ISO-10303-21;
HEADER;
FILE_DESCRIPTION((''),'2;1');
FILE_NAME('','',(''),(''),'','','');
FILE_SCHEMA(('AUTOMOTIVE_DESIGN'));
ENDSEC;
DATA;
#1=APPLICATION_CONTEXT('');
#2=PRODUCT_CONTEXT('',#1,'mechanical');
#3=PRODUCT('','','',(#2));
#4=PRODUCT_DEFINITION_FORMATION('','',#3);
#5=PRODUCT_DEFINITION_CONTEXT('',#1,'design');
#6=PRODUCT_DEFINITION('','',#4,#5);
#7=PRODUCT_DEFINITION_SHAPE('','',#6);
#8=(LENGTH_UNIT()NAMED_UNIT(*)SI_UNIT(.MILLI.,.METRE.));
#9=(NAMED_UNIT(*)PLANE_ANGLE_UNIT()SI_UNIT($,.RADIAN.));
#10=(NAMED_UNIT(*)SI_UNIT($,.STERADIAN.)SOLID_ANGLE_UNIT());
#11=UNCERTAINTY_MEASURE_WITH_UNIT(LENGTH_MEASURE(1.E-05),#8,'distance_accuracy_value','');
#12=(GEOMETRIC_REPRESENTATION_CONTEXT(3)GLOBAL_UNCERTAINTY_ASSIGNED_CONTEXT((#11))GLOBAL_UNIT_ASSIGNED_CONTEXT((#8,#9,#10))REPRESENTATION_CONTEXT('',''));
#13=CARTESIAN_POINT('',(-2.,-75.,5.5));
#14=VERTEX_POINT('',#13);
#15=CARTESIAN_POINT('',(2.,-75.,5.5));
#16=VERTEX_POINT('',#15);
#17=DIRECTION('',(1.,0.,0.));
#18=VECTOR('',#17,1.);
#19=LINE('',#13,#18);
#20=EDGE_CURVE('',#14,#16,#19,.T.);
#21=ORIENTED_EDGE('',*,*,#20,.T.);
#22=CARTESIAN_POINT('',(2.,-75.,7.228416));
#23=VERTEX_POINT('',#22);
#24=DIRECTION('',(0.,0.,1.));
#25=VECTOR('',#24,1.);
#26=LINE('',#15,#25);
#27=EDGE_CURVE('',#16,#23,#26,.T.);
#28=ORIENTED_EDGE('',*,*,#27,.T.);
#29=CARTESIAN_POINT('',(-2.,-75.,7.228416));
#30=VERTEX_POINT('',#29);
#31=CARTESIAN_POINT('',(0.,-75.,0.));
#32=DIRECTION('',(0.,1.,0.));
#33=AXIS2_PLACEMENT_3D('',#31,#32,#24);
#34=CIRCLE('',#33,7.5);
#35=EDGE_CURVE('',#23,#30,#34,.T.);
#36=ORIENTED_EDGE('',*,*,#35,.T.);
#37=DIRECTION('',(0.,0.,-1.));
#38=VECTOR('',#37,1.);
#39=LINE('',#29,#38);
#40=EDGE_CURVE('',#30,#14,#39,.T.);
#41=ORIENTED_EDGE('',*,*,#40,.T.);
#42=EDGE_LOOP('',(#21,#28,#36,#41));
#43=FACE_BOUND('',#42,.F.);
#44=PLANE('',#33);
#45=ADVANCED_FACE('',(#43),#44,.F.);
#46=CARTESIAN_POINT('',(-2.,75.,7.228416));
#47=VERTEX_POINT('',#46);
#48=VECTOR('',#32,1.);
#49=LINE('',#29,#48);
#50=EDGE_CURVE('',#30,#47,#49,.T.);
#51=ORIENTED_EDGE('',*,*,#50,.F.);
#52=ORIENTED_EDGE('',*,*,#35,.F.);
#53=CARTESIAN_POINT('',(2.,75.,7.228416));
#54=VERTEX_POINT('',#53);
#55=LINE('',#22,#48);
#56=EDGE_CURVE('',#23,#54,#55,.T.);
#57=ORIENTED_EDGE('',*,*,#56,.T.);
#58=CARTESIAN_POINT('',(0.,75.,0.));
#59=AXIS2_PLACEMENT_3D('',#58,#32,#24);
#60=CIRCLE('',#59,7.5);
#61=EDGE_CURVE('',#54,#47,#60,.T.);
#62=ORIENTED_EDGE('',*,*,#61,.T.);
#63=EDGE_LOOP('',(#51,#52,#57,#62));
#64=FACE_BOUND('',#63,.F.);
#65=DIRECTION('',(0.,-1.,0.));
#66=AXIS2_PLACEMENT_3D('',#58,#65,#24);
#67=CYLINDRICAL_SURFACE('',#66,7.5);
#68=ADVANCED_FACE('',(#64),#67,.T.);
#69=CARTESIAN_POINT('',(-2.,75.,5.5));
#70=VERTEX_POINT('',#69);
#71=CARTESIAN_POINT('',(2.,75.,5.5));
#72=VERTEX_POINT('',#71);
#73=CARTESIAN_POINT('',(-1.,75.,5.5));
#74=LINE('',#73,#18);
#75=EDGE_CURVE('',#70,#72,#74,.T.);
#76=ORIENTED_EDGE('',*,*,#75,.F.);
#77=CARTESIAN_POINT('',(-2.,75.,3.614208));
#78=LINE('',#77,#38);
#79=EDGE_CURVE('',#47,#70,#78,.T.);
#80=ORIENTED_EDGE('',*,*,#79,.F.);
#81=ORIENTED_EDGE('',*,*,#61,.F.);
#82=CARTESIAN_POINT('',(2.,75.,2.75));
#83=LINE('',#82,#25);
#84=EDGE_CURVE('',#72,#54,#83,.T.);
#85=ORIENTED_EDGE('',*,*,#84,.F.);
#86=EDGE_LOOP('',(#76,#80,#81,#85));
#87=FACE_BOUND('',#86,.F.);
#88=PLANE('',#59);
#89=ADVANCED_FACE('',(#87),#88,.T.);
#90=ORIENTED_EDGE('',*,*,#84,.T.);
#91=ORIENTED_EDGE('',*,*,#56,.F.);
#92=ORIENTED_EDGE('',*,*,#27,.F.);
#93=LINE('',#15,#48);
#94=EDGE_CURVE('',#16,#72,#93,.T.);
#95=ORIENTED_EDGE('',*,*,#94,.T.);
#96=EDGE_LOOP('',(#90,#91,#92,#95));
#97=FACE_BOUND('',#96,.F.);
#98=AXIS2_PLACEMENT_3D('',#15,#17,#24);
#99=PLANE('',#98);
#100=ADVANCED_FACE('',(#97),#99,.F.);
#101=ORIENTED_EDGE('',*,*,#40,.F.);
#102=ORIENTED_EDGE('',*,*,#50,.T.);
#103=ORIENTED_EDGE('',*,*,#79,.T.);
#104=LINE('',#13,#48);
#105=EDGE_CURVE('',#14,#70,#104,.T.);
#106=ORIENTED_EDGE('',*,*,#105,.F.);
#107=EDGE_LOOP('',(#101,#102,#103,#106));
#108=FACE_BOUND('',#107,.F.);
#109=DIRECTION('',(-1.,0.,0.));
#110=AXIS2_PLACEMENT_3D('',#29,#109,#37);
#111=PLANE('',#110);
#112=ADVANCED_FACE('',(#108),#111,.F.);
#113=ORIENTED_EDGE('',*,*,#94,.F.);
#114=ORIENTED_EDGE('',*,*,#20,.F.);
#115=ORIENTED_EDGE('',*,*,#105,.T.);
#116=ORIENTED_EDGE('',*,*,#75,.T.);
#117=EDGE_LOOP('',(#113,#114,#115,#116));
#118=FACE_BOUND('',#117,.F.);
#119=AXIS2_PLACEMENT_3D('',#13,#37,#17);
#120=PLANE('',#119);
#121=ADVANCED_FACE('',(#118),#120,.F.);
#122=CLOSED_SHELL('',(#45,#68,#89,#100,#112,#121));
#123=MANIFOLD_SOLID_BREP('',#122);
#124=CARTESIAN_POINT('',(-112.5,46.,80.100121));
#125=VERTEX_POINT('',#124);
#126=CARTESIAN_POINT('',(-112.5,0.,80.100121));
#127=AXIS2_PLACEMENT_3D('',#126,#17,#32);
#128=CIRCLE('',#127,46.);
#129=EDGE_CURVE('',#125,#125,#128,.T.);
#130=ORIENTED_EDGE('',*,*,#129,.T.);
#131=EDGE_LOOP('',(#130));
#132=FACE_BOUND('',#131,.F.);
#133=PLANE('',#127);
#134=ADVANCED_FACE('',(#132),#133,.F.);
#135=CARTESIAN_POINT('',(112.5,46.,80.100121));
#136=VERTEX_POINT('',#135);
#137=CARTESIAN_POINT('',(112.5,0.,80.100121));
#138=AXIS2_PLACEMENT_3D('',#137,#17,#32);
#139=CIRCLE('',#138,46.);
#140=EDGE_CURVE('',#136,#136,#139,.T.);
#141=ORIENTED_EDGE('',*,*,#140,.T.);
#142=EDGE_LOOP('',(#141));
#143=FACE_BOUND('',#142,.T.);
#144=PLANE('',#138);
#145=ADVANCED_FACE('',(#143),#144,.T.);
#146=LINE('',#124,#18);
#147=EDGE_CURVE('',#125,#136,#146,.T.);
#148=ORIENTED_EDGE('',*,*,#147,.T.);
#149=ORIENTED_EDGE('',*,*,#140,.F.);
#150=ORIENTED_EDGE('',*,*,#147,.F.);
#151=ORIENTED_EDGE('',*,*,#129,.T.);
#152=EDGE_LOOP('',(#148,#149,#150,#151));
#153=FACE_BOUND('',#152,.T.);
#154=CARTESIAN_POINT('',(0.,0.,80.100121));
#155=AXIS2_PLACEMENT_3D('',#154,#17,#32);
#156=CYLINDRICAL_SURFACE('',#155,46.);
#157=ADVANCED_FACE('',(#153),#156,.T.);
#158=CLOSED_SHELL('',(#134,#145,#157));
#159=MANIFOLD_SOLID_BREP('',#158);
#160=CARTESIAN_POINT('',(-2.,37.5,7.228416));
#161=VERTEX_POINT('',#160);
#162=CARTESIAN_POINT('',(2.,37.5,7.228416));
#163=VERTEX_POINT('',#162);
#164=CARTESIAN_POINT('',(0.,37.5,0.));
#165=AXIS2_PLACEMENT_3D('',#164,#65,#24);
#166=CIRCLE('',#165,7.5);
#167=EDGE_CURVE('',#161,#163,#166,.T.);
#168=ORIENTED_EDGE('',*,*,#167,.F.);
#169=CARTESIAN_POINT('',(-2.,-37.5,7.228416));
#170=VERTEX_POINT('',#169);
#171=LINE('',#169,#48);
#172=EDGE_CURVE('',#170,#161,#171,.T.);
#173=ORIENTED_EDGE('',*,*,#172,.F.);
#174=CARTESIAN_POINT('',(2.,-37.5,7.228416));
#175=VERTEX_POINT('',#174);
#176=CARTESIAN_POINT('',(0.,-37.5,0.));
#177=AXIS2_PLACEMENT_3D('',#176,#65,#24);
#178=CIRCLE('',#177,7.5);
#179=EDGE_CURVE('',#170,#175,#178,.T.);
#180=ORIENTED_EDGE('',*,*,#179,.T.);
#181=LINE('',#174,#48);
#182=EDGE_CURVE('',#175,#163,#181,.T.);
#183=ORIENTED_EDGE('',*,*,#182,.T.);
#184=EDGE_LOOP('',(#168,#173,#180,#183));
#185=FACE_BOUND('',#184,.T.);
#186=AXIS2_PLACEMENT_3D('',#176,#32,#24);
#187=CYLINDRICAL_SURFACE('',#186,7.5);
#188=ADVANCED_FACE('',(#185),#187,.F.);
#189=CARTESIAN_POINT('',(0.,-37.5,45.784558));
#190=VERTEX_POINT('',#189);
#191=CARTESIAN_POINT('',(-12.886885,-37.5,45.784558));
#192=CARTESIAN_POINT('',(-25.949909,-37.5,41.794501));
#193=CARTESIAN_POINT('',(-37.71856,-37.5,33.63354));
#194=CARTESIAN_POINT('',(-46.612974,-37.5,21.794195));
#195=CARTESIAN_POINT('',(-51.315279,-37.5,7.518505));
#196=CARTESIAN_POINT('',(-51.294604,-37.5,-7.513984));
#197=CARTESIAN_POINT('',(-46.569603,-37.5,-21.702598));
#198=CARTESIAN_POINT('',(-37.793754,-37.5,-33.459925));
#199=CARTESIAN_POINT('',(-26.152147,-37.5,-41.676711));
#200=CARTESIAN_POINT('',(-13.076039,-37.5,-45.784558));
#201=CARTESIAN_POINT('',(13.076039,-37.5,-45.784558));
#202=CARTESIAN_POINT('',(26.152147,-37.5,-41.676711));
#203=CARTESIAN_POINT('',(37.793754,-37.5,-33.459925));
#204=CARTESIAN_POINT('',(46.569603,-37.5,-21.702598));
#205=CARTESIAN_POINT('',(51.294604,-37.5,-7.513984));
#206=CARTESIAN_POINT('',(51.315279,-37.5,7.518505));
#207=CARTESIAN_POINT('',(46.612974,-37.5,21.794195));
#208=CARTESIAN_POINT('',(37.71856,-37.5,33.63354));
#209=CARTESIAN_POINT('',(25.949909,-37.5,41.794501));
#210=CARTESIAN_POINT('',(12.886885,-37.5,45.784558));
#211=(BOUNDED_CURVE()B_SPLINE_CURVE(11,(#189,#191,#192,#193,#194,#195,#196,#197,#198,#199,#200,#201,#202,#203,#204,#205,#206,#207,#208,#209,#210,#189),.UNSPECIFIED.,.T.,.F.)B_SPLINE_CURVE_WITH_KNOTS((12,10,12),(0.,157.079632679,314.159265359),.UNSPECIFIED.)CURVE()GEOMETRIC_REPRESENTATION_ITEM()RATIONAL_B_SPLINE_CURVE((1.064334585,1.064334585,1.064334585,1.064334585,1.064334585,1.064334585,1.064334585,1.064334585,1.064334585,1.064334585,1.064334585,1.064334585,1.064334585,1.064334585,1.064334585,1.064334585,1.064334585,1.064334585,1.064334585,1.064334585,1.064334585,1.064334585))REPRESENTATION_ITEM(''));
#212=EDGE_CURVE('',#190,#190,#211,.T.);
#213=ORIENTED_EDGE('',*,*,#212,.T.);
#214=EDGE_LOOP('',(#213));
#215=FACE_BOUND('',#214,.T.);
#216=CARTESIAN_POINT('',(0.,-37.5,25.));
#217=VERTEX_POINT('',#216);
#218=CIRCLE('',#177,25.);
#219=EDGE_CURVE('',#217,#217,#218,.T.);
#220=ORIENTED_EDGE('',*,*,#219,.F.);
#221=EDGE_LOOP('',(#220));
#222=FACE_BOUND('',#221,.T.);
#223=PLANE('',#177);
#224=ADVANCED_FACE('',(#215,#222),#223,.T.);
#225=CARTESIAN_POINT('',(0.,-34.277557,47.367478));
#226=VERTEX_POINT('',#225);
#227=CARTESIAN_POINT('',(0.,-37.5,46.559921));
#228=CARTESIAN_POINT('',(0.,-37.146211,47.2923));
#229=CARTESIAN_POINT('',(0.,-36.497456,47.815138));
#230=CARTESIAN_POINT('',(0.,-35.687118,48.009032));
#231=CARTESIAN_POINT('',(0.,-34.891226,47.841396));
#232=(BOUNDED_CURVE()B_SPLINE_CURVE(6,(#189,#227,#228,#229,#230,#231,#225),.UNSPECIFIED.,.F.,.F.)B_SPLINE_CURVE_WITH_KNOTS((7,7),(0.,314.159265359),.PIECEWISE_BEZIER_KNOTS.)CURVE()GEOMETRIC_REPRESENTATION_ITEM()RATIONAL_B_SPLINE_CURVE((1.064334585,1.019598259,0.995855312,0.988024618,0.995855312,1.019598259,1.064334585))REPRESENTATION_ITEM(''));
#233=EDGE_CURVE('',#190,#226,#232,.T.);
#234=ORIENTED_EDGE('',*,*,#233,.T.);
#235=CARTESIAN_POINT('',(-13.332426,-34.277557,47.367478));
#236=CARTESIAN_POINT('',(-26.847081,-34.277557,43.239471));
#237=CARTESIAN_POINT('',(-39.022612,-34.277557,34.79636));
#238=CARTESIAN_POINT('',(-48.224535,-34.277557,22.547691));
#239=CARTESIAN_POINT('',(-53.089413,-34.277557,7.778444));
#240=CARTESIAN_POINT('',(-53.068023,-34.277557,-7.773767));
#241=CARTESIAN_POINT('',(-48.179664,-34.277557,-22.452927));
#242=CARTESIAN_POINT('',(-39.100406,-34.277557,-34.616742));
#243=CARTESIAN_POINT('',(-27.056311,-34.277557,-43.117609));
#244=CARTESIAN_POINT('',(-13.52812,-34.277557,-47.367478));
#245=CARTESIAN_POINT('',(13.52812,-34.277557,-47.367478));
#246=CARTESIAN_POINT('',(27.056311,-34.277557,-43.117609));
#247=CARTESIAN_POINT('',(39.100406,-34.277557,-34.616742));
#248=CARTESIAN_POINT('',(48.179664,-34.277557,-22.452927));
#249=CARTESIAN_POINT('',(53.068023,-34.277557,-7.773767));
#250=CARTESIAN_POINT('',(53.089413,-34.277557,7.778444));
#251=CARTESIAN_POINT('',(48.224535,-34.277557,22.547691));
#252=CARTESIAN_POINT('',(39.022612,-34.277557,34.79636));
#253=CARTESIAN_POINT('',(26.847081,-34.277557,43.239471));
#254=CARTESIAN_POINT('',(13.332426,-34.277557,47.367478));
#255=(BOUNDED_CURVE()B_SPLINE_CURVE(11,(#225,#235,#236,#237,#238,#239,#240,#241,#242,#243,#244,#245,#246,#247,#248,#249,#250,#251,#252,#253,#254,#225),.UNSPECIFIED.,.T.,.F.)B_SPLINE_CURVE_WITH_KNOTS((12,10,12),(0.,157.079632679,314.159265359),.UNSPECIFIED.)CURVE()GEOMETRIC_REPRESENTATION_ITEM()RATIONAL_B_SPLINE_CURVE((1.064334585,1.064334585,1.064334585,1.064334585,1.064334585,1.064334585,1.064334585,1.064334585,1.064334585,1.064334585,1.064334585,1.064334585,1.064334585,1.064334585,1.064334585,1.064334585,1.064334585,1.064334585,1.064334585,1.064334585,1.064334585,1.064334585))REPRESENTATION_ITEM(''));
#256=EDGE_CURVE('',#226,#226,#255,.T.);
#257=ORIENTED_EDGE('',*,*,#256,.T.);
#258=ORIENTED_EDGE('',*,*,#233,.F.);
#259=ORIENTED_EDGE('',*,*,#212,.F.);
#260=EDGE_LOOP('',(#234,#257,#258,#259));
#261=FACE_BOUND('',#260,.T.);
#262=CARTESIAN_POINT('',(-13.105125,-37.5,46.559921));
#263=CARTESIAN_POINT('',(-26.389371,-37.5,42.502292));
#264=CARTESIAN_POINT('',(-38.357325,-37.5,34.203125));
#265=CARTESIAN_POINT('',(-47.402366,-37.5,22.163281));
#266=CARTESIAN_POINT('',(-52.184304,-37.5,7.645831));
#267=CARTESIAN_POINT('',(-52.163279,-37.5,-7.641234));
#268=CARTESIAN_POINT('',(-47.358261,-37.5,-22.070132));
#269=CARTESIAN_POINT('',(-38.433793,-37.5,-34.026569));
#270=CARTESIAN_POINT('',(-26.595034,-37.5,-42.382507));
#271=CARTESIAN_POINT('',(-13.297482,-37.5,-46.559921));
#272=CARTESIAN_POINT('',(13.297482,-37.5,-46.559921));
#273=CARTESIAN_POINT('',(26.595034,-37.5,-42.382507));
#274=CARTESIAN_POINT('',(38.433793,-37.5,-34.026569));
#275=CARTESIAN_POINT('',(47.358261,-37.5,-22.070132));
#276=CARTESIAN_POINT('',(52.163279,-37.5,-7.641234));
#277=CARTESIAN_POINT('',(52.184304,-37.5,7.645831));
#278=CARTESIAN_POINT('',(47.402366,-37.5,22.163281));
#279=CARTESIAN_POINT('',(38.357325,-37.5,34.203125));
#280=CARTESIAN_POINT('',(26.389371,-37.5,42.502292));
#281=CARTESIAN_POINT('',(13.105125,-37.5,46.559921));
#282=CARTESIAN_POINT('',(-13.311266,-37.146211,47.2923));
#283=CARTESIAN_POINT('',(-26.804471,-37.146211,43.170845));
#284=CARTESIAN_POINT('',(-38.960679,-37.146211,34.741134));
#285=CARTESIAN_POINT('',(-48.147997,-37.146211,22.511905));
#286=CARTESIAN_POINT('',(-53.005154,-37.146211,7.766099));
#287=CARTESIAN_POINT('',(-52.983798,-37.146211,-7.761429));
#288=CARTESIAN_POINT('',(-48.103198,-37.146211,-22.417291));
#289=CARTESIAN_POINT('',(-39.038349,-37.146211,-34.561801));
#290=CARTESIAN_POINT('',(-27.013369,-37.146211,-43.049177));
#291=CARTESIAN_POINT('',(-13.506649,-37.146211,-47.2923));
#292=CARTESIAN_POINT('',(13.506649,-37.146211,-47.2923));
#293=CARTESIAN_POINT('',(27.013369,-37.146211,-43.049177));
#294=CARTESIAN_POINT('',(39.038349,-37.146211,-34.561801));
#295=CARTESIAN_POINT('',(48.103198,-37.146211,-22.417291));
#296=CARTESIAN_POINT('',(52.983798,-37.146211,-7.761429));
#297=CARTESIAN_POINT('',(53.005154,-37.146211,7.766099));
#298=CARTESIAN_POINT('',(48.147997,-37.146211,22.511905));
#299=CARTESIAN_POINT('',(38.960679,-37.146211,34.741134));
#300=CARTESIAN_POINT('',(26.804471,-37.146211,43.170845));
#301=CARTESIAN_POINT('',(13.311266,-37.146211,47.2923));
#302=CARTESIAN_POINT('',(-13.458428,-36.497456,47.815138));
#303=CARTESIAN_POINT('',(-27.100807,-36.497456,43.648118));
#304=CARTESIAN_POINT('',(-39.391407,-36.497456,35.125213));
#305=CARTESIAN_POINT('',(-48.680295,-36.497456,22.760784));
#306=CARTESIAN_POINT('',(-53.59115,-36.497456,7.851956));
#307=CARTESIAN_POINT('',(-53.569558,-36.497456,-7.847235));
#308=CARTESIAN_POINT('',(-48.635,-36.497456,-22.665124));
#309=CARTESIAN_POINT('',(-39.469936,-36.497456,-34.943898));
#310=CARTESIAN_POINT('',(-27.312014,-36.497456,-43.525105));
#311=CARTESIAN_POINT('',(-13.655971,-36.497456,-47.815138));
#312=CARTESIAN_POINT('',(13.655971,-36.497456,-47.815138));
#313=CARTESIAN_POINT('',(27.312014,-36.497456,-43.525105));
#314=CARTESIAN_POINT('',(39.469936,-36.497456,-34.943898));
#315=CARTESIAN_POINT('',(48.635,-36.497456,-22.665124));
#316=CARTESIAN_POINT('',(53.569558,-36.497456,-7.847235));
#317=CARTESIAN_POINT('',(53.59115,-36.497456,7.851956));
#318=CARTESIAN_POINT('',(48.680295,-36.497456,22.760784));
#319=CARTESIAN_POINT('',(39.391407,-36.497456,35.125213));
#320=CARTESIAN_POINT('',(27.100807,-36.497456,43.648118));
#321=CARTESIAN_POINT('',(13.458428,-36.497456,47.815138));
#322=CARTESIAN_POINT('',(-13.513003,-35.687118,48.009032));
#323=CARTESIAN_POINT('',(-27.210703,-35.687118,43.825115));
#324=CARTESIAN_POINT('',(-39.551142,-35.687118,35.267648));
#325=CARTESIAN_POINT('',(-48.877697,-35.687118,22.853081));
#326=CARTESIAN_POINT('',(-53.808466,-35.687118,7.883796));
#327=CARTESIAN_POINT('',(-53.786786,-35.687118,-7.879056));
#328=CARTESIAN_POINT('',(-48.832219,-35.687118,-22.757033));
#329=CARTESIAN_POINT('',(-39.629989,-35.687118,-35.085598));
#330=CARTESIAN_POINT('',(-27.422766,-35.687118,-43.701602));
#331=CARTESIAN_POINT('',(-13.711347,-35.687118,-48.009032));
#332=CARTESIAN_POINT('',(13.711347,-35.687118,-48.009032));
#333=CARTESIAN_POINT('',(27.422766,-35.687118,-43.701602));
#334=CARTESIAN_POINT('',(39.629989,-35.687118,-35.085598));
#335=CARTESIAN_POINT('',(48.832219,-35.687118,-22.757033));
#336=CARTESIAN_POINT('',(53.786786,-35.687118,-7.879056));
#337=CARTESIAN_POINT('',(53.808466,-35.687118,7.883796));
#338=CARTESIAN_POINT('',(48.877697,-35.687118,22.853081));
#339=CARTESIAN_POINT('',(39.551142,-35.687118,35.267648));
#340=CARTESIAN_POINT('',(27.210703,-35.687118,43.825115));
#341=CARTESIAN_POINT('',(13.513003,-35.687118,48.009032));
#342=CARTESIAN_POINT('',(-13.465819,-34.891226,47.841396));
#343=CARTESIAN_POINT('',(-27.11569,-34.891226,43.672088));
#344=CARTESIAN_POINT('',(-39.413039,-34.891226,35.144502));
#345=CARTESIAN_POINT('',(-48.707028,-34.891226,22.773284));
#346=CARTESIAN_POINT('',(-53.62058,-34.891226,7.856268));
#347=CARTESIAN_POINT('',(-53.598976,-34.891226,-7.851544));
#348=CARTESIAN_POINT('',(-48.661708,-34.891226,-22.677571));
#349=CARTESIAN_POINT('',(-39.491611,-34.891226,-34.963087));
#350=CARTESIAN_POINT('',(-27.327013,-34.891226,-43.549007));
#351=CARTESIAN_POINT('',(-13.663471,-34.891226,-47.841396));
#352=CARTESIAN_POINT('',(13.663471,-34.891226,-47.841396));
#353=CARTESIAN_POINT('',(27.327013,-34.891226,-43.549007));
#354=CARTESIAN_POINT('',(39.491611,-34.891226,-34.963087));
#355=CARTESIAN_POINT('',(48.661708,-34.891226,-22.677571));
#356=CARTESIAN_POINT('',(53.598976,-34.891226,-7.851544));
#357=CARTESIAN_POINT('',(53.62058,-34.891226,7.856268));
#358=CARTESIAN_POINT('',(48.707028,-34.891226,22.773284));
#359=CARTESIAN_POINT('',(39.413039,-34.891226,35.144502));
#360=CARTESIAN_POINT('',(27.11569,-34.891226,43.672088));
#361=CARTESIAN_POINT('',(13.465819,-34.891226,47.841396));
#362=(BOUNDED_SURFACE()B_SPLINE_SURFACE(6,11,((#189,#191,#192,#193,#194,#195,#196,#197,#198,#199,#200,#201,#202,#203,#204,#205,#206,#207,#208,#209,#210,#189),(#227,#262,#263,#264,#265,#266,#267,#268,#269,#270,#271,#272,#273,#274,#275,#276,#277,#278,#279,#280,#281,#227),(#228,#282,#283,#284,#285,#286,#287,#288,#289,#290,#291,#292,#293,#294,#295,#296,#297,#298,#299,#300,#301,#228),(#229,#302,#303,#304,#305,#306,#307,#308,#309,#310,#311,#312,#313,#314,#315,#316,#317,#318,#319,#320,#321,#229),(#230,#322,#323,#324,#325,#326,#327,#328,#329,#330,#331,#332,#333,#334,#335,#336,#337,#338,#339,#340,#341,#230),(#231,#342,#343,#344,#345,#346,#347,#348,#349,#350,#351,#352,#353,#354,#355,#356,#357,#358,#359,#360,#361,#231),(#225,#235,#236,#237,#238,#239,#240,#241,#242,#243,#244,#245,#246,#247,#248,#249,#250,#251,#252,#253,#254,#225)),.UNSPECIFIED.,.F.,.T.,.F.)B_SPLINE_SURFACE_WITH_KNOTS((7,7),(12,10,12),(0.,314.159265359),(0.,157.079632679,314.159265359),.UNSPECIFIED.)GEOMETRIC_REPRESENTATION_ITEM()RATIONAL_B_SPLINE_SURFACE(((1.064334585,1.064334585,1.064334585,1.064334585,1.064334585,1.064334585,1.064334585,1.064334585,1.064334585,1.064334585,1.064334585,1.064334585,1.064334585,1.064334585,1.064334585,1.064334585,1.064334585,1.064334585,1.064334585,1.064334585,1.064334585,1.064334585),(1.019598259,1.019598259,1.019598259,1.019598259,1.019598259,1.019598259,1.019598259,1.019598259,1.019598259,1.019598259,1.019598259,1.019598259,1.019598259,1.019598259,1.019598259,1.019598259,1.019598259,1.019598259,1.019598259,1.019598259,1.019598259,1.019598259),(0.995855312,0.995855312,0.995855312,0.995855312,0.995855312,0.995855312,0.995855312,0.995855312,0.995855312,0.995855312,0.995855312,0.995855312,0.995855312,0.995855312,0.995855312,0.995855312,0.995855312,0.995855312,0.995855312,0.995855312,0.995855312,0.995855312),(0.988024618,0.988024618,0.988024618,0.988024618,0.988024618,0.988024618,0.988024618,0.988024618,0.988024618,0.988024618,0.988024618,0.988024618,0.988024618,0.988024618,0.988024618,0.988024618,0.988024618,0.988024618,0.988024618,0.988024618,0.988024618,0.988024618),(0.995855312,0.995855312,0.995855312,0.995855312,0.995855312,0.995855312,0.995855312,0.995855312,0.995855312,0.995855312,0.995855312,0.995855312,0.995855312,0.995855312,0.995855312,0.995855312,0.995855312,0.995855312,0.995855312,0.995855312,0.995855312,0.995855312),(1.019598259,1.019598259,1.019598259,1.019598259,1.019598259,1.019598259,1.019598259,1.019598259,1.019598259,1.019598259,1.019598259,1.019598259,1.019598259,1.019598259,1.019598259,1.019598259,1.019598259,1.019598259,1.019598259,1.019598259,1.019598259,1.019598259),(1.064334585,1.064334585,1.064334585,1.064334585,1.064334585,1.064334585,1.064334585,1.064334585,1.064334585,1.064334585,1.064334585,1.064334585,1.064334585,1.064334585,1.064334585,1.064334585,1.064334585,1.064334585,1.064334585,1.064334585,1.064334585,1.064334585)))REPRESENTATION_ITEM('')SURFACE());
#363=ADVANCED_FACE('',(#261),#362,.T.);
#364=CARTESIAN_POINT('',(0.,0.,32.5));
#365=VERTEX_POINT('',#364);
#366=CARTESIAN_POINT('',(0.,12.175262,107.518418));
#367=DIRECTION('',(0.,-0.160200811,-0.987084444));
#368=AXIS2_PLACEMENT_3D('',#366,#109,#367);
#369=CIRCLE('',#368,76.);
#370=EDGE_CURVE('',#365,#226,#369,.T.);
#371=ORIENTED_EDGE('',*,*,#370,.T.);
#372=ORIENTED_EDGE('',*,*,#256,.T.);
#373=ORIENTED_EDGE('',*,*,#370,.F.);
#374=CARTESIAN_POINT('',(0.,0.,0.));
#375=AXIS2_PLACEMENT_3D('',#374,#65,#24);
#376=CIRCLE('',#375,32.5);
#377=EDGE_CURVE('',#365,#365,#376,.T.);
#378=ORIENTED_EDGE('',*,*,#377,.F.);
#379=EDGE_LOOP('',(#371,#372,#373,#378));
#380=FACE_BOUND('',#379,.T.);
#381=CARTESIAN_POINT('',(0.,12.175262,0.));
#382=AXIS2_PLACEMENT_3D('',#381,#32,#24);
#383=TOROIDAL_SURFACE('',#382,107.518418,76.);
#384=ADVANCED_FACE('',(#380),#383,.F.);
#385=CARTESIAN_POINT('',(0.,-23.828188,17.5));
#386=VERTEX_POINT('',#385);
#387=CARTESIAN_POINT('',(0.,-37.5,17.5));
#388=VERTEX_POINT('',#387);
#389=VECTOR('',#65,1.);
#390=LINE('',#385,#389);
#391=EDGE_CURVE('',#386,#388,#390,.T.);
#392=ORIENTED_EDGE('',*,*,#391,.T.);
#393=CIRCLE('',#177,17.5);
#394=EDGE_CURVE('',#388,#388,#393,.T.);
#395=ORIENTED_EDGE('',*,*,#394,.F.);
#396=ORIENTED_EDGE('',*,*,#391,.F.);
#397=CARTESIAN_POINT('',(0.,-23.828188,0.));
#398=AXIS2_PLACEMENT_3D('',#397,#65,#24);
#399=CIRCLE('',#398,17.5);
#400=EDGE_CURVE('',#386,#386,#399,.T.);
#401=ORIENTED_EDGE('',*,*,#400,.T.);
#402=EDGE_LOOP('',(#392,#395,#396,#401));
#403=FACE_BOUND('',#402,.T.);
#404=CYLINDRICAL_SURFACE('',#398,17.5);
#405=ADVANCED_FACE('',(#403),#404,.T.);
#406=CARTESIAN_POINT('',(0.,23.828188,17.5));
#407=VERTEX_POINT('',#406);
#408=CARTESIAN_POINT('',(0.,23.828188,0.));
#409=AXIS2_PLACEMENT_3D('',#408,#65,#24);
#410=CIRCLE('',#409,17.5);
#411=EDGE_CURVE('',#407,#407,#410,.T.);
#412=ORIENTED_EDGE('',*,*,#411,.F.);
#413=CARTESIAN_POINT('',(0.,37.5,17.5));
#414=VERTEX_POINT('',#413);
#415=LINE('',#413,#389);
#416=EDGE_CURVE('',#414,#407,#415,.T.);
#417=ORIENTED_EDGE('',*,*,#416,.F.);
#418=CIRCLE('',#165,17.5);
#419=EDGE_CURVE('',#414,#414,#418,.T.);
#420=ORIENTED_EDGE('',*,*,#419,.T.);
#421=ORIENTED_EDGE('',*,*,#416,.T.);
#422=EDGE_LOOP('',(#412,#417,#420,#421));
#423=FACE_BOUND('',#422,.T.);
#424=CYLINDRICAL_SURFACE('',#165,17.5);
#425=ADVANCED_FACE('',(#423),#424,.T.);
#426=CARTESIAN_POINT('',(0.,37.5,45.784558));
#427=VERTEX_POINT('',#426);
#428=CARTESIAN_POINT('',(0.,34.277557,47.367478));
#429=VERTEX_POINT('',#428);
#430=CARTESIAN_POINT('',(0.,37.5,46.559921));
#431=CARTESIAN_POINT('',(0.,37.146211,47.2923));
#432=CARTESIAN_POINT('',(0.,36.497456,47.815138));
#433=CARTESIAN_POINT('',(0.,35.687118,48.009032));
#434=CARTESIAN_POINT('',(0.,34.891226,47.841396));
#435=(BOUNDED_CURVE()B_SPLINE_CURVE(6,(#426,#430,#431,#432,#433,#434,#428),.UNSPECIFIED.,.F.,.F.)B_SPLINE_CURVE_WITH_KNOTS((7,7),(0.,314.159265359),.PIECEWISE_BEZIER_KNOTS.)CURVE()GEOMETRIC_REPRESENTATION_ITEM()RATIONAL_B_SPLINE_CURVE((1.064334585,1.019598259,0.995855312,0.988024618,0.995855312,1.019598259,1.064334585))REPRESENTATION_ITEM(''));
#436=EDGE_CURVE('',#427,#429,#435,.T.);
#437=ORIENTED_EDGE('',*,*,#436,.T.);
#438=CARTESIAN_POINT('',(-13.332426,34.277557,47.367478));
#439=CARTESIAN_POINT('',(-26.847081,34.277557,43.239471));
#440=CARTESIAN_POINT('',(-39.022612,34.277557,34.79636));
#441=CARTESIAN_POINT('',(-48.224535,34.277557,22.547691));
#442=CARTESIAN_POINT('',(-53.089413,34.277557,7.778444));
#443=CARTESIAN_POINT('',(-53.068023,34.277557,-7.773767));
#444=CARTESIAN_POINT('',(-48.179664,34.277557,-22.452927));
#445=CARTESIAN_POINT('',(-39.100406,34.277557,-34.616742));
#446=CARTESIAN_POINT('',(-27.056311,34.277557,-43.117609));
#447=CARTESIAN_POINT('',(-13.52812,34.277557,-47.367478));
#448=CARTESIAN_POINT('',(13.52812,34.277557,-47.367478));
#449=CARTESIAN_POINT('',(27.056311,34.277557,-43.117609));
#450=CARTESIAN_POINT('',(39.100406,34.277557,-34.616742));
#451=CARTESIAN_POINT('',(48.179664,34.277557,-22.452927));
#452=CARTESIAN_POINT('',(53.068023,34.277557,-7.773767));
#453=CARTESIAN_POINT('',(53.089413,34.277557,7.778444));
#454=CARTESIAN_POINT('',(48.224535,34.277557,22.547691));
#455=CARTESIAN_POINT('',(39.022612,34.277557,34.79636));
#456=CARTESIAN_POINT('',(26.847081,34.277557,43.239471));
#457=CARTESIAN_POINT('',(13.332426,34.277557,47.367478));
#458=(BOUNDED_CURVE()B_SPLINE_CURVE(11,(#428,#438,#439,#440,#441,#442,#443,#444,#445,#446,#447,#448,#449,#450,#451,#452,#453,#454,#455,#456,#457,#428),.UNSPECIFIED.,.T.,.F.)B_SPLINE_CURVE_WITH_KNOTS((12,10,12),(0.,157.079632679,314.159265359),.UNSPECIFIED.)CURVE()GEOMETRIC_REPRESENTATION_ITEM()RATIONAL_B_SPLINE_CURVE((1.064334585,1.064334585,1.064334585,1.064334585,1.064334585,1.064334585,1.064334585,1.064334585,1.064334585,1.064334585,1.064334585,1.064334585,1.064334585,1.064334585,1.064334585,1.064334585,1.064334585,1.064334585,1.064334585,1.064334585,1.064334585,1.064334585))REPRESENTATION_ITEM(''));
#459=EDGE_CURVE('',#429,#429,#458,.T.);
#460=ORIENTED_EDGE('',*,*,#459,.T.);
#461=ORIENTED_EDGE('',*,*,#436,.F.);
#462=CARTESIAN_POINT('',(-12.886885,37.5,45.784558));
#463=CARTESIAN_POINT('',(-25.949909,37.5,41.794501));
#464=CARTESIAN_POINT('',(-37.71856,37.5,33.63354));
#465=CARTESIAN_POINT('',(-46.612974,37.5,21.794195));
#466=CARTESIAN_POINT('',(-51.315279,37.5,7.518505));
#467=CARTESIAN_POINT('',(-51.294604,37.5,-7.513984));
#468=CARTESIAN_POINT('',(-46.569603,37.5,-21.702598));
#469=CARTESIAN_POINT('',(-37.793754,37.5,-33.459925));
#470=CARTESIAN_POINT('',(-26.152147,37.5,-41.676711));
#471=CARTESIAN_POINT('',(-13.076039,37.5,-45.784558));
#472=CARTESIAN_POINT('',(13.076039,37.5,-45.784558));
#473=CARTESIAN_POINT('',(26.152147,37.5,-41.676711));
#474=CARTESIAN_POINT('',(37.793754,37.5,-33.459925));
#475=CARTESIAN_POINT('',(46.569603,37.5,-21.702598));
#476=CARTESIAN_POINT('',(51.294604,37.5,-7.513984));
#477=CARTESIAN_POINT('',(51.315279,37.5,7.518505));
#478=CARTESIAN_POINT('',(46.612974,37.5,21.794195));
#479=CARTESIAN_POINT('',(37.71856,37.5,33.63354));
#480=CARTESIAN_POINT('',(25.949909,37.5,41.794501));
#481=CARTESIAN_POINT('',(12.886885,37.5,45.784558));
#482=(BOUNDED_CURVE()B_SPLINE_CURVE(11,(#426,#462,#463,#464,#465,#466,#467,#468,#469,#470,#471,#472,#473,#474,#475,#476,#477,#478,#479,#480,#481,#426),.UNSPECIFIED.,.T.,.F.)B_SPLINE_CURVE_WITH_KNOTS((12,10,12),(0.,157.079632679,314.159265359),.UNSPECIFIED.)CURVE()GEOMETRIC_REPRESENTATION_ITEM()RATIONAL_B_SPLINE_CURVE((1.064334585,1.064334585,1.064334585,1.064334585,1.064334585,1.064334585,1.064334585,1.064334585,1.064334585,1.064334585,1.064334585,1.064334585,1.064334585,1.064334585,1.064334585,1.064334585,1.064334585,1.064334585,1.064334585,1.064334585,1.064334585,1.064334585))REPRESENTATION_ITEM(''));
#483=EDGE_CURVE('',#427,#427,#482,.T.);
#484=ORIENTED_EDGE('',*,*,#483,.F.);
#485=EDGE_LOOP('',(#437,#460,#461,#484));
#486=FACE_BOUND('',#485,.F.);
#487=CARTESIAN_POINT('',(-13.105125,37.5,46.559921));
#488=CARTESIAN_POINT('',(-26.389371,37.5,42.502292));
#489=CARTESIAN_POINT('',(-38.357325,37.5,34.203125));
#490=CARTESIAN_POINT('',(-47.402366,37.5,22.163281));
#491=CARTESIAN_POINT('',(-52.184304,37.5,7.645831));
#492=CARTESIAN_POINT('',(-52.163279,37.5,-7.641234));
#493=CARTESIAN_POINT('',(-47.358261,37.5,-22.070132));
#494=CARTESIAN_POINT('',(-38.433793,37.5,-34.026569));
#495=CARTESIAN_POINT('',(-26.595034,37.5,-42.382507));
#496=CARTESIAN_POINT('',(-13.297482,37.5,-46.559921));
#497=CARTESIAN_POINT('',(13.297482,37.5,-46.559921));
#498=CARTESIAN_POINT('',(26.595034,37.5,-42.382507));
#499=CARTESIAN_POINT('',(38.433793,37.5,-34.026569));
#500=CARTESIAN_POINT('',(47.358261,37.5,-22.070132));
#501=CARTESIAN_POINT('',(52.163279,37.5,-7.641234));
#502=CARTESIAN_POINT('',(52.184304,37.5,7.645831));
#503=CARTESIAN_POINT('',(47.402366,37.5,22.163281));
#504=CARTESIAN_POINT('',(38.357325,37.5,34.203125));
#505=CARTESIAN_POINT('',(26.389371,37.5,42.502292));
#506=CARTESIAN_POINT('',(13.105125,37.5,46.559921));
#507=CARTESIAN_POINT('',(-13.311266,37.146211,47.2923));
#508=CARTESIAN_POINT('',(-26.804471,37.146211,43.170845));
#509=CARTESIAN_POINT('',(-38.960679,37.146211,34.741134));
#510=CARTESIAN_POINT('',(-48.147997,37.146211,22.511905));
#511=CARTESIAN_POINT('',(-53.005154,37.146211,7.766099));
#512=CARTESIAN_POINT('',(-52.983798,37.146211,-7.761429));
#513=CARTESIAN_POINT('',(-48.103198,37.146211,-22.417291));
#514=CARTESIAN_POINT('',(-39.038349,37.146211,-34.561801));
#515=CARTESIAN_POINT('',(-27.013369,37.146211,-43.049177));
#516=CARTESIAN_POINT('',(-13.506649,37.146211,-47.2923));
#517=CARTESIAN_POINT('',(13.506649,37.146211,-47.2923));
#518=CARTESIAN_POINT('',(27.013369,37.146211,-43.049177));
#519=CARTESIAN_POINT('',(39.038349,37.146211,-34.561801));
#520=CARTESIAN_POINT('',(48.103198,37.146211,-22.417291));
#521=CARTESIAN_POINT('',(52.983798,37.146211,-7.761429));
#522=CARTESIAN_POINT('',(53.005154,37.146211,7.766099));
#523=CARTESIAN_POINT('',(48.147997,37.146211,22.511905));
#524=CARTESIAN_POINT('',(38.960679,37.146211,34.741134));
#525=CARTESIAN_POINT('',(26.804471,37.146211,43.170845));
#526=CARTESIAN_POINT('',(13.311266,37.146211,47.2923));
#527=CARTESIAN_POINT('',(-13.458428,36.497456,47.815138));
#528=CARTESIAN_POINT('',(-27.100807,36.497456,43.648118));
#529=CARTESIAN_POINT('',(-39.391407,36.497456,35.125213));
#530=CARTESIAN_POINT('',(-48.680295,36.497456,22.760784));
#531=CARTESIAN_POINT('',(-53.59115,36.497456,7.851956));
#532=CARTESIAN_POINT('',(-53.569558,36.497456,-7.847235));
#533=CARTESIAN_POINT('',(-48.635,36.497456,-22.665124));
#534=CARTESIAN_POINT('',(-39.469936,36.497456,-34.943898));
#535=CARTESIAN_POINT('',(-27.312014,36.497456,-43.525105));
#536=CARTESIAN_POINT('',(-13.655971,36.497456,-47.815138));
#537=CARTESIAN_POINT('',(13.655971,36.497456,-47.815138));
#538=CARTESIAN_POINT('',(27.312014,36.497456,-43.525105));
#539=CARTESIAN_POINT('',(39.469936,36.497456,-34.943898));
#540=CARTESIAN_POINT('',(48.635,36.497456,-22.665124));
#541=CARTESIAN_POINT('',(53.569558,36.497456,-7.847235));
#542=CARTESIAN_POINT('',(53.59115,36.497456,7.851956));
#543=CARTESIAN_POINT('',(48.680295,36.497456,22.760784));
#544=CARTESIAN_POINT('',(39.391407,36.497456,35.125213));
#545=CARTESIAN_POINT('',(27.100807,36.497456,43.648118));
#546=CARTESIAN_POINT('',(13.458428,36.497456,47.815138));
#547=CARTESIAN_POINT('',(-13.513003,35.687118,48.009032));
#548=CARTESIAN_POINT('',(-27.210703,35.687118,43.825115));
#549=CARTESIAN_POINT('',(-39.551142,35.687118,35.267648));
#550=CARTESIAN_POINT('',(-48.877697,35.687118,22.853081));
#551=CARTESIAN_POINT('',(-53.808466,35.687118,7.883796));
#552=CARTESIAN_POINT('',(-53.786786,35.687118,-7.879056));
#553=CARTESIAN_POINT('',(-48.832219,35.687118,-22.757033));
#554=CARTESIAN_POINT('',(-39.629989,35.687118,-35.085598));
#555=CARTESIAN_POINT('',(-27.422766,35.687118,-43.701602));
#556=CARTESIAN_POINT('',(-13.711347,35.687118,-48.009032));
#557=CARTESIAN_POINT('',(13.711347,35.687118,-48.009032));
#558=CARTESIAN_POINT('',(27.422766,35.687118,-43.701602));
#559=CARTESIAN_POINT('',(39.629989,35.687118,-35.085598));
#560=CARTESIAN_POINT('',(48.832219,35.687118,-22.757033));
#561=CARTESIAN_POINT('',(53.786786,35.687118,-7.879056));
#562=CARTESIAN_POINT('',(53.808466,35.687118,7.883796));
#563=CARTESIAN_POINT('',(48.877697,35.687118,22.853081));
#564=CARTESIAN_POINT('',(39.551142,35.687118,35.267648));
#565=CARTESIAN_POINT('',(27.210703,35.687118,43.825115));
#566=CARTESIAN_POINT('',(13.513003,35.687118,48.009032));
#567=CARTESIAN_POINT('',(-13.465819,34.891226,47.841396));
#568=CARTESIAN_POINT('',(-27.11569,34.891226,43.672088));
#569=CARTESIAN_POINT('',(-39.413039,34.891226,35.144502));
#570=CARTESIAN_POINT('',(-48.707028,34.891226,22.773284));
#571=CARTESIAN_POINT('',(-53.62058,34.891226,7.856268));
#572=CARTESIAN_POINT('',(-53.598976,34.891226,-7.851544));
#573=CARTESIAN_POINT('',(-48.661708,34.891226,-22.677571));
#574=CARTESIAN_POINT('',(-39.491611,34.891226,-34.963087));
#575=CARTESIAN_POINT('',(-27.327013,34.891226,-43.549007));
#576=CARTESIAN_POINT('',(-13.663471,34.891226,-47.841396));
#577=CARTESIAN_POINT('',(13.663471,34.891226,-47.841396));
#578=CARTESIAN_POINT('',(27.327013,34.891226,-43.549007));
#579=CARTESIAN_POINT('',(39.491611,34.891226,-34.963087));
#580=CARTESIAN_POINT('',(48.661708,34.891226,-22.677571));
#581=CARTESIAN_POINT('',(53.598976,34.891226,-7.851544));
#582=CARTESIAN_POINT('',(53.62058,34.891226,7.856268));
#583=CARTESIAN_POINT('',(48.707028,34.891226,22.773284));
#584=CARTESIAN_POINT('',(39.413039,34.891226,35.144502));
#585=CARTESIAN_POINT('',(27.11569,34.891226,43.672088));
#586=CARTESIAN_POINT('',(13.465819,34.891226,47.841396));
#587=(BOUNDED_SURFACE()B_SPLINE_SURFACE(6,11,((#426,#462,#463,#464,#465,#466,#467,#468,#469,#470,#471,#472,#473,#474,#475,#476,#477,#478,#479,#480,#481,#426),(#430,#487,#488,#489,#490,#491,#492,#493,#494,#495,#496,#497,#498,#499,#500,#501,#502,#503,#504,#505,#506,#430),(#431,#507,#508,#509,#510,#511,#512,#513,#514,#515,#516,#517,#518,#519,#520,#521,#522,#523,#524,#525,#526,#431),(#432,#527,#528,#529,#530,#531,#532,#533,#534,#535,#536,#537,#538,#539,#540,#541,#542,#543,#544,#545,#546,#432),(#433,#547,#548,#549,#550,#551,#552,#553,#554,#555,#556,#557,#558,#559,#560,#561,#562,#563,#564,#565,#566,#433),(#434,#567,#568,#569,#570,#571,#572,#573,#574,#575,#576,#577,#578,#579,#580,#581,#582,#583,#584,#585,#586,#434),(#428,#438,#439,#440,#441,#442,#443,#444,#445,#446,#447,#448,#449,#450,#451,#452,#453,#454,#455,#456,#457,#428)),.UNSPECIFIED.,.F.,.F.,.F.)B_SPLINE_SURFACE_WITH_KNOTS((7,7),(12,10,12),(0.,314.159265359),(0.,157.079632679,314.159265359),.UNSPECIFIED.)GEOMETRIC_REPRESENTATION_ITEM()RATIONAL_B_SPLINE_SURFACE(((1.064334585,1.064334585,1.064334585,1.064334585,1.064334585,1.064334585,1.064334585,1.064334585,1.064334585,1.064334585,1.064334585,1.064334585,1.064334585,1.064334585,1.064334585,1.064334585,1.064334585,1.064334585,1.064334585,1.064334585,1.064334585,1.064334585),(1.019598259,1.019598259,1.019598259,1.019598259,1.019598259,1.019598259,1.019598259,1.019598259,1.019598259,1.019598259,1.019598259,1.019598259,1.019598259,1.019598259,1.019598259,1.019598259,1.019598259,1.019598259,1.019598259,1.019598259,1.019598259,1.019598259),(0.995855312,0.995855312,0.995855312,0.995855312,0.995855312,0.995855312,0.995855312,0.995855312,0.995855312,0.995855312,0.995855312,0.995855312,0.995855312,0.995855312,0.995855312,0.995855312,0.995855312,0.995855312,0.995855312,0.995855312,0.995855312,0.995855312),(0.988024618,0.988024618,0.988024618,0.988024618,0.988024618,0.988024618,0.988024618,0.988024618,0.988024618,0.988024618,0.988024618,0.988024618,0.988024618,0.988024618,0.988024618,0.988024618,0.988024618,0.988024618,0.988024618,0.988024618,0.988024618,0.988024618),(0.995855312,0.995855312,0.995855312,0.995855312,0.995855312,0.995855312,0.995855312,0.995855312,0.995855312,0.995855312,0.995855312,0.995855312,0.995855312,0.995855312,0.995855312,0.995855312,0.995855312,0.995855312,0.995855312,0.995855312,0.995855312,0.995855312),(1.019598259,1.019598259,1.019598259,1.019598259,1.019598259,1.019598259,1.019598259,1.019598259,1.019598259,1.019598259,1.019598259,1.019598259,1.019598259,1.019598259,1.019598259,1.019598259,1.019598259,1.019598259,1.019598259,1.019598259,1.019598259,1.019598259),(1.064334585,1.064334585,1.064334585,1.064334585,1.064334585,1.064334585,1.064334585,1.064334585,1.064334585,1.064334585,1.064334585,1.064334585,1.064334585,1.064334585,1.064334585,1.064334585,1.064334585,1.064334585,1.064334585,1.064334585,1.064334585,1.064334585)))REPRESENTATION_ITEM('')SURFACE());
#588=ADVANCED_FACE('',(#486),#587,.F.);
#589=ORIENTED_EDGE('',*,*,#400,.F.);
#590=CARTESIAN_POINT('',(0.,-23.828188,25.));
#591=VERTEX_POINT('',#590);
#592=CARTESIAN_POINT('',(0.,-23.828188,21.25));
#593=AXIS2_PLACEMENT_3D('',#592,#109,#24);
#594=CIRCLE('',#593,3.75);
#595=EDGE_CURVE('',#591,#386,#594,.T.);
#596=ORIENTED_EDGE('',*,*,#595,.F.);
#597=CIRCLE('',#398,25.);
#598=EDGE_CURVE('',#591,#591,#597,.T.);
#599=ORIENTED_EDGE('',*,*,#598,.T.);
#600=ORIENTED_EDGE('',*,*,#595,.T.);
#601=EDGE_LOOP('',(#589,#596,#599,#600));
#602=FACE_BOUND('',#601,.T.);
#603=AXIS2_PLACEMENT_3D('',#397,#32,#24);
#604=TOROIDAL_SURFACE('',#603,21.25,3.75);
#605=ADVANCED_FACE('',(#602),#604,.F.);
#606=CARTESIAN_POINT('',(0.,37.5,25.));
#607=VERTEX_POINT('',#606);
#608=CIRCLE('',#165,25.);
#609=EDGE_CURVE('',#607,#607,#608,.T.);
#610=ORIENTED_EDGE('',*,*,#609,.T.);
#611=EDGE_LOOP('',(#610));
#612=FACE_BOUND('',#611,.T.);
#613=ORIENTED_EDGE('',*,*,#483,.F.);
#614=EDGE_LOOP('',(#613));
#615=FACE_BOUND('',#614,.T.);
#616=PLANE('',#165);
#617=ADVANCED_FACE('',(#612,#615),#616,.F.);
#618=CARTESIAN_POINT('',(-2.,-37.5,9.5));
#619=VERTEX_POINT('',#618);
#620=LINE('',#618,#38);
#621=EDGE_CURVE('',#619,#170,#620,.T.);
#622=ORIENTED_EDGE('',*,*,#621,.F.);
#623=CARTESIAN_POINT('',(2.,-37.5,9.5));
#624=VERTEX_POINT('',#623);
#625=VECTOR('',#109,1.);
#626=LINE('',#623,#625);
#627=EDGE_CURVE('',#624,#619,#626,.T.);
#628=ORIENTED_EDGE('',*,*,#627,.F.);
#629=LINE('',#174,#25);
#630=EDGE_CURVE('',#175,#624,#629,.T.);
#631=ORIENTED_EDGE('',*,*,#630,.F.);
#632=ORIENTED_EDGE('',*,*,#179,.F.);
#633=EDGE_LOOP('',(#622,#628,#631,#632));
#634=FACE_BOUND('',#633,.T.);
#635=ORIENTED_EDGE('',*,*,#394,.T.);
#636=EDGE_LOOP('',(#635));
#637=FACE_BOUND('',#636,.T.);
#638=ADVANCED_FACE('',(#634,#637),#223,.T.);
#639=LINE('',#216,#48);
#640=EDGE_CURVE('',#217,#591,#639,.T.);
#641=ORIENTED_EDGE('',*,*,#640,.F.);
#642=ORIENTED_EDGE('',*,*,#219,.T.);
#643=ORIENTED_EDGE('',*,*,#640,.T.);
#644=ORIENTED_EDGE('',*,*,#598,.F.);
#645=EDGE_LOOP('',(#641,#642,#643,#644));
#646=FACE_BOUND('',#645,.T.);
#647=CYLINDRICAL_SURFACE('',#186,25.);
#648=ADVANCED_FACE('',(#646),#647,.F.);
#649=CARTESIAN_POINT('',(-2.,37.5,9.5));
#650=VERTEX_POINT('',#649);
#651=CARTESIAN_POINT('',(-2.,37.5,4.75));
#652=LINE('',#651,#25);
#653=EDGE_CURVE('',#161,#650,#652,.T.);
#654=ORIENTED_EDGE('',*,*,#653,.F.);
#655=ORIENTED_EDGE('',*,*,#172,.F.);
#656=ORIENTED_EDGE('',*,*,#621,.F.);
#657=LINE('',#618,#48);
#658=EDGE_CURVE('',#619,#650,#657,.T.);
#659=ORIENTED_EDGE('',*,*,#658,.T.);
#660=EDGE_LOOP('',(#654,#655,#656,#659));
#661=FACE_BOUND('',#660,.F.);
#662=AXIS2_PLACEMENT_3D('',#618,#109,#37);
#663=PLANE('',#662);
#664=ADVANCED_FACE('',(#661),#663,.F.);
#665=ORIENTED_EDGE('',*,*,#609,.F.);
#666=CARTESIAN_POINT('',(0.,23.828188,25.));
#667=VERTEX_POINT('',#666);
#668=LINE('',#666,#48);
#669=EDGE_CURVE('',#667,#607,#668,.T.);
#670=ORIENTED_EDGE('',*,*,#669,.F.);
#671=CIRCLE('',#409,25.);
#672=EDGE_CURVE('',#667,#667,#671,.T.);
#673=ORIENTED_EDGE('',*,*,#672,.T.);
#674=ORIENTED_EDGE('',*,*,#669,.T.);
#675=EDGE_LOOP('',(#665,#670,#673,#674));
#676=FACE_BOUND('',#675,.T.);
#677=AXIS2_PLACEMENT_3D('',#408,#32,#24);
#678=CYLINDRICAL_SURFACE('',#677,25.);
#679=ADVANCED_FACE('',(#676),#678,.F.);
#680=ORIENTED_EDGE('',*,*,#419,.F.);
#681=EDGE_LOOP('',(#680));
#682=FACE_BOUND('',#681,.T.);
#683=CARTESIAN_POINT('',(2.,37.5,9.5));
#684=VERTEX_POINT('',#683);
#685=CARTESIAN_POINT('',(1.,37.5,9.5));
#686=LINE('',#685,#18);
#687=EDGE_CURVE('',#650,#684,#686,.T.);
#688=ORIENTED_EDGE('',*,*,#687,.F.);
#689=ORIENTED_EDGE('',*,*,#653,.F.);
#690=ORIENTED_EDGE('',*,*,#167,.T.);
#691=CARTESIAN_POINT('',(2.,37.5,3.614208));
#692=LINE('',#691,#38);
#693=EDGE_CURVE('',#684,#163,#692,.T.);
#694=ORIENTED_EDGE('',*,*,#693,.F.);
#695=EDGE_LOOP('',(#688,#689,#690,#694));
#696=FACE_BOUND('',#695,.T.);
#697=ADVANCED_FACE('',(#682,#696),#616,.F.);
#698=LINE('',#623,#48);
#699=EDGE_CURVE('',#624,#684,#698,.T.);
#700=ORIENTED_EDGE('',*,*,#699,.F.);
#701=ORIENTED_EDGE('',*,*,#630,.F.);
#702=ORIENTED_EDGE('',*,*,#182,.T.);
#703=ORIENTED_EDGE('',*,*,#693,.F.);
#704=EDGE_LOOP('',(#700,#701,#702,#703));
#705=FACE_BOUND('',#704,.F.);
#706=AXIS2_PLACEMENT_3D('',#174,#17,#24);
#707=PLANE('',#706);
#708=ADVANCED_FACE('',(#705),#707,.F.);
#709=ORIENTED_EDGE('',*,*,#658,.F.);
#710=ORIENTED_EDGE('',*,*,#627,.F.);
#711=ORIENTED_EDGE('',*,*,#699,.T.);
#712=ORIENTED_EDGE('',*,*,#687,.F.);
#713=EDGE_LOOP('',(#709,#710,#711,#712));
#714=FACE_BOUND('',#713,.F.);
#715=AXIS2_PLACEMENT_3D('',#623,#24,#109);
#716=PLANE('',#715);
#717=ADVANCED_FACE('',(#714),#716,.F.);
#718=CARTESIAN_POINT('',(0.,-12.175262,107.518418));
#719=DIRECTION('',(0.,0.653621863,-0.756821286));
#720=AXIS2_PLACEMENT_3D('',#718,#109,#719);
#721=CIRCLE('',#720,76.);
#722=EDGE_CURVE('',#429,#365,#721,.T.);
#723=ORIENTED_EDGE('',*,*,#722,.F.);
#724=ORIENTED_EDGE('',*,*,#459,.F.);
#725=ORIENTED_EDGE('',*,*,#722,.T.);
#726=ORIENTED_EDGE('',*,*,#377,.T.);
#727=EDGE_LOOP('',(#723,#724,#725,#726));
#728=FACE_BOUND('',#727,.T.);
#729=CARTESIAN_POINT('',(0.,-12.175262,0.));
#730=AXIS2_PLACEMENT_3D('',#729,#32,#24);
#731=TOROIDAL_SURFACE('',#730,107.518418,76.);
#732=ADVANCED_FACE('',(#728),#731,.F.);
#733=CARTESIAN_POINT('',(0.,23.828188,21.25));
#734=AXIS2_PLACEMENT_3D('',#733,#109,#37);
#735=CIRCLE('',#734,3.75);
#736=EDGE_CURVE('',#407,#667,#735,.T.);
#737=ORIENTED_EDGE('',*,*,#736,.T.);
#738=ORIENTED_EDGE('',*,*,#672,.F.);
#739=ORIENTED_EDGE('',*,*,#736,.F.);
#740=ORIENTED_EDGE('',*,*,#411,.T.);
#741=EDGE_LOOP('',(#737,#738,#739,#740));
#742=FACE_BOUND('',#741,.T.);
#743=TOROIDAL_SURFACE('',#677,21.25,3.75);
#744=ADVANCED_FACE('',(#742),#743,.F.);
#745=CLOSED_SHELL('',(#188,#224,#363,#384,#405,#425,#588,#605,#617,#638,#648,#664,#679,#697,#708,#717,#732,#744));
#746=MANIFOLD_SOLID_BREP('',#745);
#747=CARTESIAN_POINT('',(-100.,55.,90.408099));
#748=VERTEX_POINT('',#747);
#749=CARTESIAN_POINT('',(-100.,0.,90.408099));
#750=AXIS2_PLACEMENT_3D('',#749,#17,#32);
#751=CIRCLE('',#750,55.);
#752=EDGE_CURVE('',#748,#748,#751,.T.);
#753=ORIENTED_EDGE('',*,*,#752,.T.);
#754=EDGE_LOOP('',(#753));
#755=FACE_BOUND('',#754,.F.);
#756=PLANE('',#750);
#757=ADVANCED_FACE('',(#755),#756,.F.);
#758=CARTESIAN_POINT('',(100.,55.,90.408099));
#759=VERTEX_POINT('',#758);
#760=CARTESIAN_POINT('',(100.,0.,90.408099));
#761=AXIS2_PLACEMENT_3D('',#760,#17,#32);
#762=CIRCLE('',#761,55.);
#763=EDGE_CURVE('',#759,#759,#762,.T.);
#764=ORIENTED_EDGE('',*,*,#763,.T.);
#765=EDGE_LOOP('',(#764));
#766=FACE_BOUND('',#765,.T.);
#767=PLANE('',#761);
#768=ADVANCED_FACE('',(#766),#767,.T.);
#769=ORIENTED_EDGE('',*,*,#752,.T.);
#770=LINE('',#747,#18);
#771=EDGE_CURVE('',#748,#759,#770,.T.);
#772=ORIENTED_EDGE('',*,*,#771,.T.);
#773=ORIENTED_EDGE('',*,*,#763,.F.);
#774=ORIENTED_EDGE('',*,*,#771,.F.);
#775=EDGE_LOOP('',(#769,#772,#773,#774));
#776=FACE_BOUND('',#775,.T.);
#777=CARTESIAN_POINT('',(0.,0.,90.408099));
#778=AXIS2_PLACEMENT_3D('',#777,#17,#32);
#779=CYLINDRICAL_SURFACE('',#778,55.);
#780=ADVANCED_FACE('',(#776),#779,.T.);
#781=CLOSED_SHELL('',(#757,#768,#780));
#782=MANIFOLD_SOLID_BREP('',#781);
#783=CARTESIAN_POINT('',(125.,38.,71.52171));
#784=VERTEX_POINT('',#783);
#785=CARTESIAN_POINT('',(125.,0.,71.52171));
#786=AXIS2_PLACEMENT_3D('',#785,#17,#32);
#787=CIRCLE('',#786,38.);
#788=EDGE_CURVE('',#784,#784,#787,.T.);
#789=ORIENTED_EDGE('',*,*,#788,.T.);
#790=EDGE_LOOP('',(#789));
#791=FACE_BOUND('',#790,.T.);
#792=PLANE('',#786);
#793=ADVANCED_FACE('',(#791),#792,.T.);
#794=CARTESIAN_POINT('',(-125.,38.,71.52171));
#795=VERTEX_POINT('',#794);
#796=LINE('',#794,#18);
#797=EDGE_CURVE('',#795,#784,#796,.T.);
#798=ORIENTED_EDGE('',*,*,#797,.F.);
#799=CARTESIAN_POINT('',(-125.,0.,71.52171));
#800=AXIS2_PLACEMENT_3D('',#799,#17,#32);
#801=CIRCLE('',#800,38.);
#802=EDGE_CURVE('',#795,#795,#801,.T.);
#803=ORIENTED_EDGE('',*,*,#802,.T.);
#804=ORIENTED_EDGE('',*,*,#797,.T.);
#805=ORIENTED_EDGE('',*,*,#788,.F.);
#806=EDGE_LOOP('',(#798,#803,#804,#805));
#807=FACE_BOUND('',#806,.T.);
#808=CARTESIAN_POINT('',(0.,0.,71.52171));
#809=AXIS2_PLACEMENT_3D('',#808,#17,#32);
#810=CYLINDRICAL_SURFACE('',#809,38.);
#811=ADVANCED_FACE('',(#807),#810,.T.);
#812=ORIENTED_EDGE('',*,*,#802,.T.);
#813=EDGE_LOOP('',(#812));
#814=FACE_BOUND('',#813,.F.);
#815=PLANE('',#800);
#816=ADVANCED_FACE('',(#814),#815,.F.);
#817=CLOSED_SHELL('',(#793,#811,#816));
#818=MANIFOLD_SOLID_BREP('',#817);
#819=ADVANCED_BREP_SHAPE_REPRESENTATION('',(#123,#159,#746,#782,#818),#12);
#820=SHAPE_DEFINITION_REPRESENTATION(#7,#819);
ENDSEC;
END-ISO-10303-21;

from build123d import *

# Parameters (mm, degrees)
F3_DEPTH  = 150.001
F7_DEPTH  = 112.501
F8_R      = 2
F9_R      = 38
F10_DEPTH = 125
F13_R     = 46
F14_DEPTH = 112.5
F16_R     = 55
F17_DEPTH = 100


# Not quite as in the source:
# - a feature names something its author has since deleted; it is built from what else it names


with BuildPart() as f1:
    # F0 (on Right) → F1 (revolve)
    with BuildSketch(Plane.YZ):
        Polygon((75, 7.5), (0, 7.5), (-75, 7.5), (-75, 0), (75, 0), align=None)
    revolve(axis=Axis((0, 0, 0), (0, 1, 0)))

    # F2 (on face) → F3 (cut, through all)
    with BuildSketch(Plane.XZ.offset(75)):
        with BuildLine():
            Line((2, 5.5), (2, 7.2284161474))
            ThreePointArc((2, 7.2284161474), (0, 7.5), (-2, 7.2284161474))
            Line((-2, 7.2284161474), (-2, 5.5))
            Line((-2, 5.5), (0, 5.5))
            Line((0, 5.5), (2, 5.5))
        make_face()
    extrude(amount=-F3_DEPTH, mode=Mode.SUBTRACT)


with BuildPart() as f5:
    # F4 (on Right) → F5 (revolve)
    with BuildSketch(Plane.YZ):
        with BuildLine():
            Line((-37.5, 7.5), (0, 7.5))
            Line((0, 7.5), (37.5, 7.5))
            Line((37.5, 7.5), (37.5, 17.5))
            Line((37.5, 17.5), (23.8281880061, 17.5))
            ThreePointArc((23.8281880061, 17.5), (20.0781880061, 21.25), (23.8281880061, 25))
            Line((23.8281880061, 25), (37.5, 25))
            Line((37.5, 25), (37.5, 50))
            ThreePointArc((37.5, 50), (19.9640337403, 38.648499128), (0, 32.5))
            ThreePointArc((0, 32.5), (-19.9640337403, 38.648499128), (-37.5, 50))
            Line((-37.5, 50), (-37.5, 25))
            Line((-37.5, 25), (-23.8281880061, 25))
            ThreePointArc((-23.8281880061, 25), (-20.0781880061, 21.25), (-23.8281880061, 17.5))
            Line((-23.8281880061, 17.5), (-37.5, 17.5))
            Line((-37.5, 17.5), (-37.5, 7.5))
        make_face()
    revolve(axis=Axis((0, 75, 0), (0, -1, 0)))

    # F6 (on face) → F7 (cut, through all)
    with BuildSketch(Plane.XZ.offset(37.5)):
        with BuildLine():
            Line((-2, 9.5), (-2, 7.2284161474))
            ThreePointArc((-2, 7.2284161474), (0, 7.5), (2, 7.2284161474))
            Line((2, 7.2284161474), (2, 9.5))
            Line((2, 9.5), (-2, 9.5))
        make_face()
    extrude(amount=-F7_DEPTH, mode=Mode.SUBTRACT)

    # F8
    f8_edges = [f5.edges().sort_by_distance(p)[0] for p in [
        (0, -37.5, -50),
        (0, 37.5, -50),
    ]]
    fillet(f8_edges, radius=F8_R)


with BuildPart() as f10:
    # F9 (on Right) → F10 (new body, symmetric)
    with BuildSketch(Plane.YZ):
        with Locations((0, 71.5217095242)):
            Circle(F9_R)
    extrude(amount=F10_DEPTH, both=True)


with BuildPart() as f11_1:
    # F11: copy of F10
    add(f10.part)


with BuildPart() as f14:
    # F13 (on Right) → F14 (new body, symmetric)
    with BuildSketch(Plane.YZ):
        with Locations((0, 419.790243499)):
            Circle(F13_R)
    extrude(amount=F14_DEPTH, both=True)


with BuildPart() as f14b:
    # F13 (on Right) → F14, piece 2 (new body, symmetric)
    with BuildSketch(Plane.YZ):
        with Locations((0, 80.1001208774)):
            Circle(F13_R)
    extrude(amount=F14_DEPTH, both=True)


with BuildPart() as f17:
    # F16 (on Right) → F17 (new body, symmetric)
    with BuildSketch(Plane.YZ):
        with Locations((0, 90.4080991159)):
            Circle(F16_R)
    extrude(amount=F17_DEPTH, both=True)


solid = Compound([f1.part, f5.part, f10.part, f14b.part, f17.part])
